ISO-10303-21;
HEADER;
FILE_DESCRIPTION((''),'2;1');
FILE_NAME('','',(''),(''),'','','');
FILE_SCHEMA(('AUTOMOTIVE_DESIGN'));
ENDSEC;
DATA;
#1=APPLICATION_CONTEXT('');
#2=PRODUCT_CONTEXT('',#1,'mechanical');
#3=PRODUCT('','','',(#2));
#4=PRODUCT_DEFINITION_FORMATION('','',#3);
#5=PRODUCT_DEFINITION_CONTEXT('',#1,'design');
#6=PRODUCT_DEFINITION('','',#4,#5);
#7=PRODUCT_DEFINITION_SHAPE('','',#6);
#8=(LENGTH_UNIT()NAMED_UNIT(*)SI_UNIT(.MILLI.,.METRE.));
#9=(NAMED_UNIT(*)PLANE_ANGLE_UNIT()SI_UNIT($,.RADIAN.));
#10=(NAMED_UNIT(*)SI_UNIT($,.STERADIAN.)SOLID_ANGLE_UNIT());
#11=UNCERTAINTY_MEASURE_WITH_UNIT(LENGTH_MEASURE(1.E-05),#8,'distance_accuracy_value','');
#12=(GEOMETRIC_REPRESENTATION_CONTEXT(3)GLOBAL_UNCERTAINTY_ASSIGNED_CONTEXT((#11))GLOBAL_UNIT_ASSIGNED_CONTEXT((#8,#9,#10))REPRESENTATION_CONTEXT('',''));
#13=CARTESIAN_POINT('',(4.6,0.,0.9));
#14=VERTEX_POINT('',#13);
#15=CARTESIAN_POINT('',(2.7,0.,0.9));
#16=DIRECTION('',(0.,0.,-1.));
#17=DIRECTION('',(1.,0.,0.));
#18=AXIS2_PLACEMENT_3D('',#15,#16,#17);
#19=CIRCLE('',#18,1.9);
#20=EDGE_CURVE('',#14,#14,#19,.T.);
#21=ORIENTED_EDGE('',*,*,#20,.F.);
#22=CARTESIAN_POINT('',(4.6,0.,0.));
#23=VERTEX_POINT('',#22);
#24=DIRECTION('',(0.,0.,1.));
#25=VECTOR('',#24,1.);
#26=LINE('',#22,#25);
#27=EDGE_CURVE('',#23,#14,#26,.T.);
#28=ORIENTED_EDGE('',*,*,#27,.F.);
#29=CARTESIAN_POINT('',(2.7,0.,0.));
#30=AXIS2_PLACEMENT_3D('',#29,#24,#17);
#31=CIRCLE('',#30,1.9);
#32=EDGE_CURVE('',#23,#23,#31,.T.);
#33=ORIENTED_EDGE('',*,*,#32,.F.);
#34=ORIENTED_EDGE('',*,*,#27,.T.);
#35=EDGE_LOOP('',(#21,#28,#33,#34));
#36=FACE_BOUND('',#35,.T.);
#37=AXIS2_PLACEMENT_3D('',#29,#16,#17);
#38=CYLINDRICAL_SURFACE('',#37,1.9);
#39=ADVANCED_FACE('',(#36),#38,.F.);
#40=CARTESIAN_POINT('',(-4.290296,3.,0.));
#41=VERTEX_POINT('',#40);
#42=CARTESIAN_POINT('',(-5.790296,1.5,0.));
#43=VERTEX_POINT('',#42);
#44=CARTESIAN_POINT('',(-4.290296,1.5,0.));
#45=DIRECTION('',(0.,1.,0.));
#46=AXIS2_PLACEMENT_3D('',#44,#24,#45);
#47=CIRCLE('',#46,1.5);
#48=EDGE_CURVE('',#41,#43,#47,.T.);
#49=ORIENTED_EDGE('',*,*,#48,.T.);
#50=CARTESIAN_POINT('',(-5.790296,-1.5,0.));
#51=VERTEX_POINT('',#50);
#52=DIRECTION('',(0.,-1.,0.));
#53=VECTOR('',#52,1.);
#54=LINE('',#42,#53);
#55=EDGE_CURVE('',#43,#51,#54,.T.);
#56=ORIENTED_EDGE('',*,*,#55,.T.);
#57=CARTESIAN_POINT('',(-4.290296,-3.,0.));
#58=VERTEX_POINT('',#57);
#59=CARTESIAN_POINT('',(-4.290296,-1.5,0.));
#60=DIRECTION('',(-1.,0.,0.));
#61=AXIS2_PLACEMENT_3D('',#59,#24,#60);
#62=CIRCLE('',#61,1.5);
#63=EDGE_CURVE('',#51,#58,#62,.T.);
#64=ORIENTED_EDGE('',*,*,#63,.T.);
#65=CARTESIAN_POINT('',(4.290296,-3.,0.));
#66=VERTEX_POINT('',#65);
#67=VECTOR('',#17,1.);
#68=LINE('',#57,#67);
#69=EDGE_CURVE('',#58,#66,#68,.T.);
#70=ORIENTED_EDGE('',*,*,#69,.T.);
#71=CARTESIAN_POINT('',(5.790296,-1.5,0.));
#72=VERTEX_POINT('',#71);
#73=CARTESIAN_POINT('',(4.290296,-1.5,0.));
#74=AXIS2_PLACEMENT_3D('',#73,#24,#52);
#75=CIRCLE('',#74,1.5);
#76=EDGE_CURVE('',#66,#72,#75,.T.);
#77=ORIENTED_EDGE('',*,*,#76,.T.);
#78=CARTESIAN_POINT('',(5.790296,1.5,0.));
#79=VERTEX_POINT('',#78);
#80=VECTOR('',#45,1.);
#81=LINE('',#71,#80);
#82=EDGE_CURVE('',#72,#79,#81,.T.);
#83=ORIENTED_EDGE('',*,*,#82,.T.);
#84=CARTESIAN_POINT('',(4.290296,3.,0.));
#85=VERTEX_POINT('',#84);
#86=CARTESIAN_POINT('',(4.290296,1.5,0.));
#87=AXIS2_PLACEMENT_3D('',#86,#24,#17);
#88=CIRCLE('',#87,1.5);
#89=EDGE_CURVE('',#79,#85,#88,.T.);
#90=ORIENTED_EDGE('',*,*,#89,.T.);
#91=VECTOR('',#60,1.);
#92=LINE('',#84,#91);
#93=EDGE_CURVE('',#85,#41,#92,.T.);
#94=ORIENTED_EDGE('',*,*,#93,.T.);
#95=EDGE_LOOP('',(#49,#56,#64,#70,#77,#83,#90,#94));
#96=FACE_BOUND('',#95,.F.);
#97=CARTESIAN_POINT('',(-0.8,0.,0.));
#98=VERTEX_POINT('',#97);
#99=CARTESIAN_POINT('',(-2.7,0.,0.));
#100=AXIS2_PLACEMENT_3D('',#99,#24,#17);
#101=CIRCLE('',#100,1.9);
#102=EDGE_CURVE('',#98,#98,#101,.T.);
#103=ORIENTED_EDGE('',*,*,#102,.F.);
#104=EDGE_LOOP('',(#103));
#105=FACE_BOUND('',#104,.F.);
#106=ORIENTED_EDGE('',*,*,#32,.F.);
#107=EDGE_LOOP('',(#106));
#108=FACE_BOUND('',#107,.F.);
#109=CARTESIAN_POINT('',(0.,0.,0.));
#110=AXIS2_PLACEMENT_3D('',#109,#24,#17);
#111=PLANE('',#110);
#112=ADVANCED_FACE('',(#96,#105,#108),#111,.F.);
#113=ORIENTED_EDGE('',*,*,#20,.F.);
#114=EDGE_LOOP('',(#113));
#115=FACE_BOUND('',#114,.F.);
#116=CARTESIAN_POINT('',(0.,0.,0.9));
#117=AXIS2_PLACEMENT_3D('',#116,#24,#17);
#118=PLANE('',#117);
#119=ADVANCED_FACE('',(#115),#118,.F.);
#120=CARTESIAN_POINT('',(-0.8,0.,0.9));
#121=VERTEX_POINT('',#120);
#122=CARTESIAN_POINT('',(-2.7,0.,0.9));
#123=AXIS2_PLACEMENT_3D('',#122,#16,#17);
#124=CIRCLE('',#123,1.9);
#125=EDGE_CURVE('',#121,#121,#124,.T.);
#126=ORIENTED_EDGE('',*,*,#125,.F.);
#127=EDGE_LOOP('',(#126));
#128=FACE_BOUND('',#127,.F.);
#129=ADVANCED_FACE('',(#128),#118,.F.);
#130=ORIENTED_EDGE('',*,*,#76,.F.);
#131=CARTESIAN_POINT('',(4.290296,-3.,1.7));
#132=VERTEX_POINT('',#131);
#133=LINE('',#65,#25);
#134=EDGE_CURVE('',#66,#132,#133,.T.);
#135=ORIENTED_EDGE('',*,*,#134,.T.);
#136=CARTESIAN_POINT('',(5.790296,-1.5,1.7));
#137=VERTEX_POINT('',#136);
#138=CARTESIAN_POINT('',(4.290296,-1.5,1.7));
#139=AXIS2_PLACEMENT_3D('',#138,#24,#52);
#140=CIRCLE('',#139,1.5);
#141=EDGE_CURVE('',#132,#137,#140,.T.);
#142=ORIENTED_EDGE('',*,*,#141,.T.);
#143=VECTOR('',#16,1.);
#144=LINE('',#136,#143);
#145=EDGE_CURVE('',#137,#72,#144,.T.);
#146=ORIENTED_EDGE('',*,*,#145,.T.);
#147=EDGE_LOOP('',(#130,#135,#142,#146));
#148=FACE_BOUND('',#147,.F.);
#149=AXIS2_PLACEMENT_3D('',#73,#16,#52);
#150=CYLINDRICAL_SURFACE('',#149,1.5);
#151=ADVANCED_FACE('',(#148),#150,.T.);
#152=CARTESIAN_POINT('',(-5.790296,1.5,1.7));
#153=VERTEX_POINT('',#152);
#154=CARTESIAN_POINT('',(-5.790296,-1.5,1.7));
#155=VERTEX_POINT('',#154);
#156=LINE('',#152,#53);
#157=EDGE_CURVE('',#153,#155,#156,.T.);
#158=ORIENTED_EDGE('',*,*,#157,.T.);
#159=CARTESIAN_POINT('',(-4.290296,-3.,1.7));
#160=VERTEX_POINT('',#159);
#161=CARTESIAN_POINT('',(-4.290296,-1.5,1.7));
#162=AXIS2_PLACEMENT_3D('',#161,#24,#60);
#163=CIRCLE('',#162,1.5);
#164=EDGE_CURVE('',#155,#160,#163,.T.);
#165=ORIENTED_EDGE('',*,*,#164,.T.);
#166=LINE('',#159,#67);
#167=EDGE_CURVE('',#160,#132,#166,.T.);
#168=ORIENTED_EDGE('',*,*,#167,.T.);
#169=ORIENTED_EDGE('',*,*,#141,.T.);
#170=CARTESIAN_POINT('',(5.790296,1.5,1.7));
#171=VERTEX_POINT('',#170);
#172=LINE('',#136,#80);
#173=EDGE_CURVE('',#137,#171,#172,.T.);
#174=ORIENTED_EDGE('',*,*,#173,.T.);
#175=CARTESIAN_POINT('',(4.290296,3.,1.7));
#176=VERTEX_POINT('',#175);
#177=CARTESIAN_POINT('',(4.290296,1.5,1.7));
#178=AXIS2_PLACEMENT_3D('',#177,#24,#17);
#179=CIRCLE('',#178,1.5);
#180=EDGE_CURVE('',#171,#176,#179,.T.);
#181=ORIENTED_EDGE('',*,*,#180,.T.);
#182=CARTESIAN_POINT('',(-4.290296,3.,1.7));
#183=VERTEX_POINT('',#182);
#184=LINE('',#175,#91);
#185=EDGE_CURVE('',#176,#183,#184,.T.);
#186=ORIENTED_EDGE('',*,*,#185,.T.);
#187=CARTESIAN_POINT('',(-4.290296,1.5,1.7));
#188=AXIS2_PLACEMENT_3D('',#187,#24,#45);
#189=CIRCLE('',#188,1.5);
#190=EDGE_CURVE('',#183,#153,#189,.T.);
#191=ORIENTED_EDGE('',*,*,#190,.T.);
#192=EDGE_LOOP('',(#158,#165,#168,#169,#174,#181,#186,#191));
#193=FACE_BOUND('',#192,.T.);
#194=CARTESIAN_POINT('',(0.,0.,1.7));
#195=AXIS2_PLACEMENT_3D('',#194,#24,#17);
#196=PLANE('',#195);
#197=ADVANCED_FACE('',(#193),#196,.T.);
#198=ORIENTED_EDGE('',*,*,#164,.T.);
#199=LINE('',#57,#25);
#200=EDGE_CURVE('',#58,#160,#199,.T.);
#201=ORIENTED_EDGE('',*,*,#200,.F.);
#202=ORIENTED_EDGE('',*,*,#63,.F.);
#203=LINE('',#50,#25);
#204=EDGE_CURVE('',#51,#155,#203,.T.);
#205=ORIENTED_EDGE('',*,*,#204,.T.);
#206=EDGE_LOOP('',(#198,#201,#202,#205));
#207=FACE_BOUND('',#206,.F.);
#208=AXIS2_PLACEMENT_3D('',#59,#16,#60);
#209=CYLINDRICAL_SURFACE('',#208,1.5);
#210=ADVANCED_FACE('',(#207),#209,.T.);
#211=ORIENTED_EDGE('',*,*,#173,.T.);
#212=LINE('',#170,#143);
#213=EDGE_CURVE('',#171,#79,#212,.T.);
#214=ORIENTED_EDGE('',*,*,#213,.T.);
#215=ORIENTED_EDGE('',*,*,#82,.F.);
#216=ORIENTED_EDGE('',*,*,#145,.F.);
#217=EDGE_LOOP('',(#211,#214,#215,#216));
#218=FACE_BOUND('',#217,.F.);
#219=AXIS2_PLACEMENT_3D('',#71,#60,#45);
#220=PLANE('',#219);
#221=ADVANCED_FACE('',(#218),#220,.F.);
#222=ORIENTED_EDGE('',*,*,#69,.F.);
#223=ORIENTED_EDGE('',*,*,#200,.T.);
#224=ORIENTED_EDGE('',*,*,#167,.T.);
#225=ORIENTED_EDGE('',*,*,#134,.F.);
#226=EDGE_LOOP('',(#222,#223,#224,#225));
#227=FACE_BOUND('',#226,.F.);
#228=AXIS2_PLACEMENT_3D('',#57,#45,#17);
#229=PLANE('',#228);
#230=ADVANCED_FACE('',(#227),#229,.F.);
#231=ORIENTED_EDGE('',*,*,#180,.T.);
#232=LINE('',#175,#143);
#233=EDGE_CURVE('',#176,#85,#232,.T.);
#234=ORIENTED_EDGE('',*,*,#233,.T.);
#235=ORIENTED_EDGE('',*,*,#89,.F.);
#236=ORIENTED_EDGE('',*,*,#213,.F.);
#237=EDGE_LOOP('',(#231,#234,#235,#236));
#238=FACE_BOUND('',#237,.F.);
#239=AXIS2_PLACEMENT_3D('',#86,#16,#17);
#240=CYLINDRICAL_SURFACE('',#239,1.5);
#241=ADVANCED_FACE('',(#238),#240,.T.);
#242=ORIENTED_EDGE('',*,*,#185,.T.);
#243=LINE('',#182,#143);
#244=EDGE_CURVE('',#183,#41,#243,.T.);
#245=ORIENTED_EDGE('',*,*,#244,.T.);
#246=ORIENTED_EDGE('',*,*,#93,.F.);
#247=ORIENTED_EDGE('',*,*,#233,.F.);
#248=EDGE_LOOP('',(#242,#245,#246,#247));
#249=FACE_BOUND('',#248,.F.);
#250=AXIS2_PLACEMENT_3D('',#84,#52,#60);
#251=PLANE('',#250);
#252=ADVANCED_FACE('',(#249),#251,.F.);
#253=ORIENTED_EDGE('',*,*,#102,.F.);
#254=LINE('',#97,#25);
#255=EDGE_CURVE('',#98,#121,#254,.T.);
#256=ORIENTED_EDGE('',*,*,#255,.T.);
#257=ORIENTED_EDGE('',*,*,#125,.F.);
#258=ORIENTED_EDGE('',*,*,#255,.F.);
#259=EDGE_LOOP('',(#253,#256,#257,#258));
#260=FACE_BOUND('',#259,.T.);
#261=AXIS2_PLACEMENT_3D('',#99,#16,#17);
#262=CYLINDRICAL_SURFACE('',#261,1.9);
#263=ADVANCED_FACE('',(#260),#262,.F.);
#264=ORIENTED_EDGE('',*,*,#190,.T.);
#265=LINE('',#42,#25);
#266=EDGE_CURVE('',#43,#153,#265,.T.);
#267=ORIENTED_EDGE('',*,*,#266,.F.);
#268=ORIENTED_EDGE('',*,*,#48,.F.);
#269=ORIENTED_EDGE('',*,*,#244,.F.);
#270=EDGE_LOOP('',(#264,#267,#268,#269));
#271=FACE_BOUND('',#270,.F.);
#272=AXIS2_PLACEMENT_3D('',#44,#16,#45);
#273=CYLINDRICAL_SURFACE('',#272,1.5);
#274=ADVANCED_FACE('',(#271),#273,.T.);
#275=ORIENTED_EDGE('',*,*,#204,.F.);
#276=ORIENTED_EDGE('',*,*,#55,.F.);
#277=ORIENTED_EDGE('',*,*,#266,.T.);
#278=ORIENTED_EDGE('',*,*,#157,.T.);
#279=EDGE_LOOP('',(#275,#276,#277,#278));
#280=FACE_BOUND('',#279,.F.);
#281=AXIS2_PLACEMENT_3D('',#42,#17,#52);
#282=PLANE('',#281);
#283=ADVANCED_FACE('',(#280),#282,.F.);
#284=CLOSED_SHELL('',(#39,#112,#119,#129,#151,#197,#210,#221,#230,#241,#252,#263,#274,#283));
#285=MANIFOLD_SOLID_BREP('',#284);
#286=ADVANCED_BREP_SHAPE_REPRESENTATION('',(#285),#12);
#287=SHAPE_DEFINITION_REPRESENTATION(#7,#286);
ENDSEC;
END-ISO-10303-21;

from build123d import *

# Parameters (mm, degrees)
F0_R     = 1.9
F1_DEPTH = 1.7
F2_R     = 1.9
F3_DEPTH = 0.8


# Not quite as in the source:
# - a feature names something its author has since deleted; it is built from what else it names


with BuildPart() as f1:
    # F0 (on Top) → F1 (new body)
    with BuildSketch(Plane.XY):
        with BuildLine():
            Line((-0.3902956496, 3), (-4.2902956496, 3))
            ThreePointArc((-4.2902956496, 3), (-5.3509558214, 2.5606601718), (-5.7902956496, 1.5))
            Line((-5.7902956496, 1.5), (-5.7902956496, -1.5))
            ThreePointArc((-5.7902956496, -1.5), (-5.3509558214, -2.5606601718), (-4.2902956496, -3))
            Line((-4.2902956496, -3), (-0.3902956496, -3))
            Line((-0.3902956496, -3), (0.3902956496, -3))
            Line((0.3902956496, -3), (4.2902956496, -3))
            ThreePointArc((4.2902956496, -3), (5.3509558214, -2.5606601718), (5.7902956496, -1.5))
            Line((5.7902956496, -1.5), (5.7902956496, 1.5))
            ThreePointArc((5.7902956496, 1.5), (5.3509558214, 2.5606601718), (4.2902956496, 3))
            Line((4.2902956496, 3), (0.3902956496, 3))
            Line((0.3902956496, 3), (-0.3902956496, 3))
        make_face()
        with Locations((-2.7, 0)):
            Circle(F0_R, mode=Mode.SUBTRACT)
        with Locations((2.7, 0)):
            Circle(F0_R, mode=Mode.SUBTRACT)
    extrude(amount=F1_DEPTH)

    # F2 (on face) → F3 (join)
    with BuildSketch(Plane.XY.offset(1.7)):
        with BuildLine():
            ThreePointArc((-5.7902956496, -1.5), (-5.3509558214, -2.5606601718), (-4.2902956496, -3))
            Line((-4.2902956496, -3), (4.2902956496, -3))
            ThreePointArc((4.2902956496, -3), (5.3509558214, -2.5606601718), (5.7902956496, -1.5))
            Line((5.7902956496, -1.5), (5.7902956496, 1.5))
            ThreePointArc((5.7902956496, 1.5), (5.3509558214, 2.5606601718), (4.2902956496, 3))
            Line((4.2902956496, 3), (-4.2902956496, 3))
            ThreePointArc((-4.2902956496, 3), (-5.3509558214, 2.5606601718), (-5.7902956496, 1.5))
            Line((-5.7902956496, 1.5), (-5.7902956496, -1.5))
        make_face()
        with Locations((-2.7, 0)):
            Circle(F2_R, mode=Mode.SUBTRACT)
        with Locations((2.7, 0)):
            Circle(F2_R, mode=Mode.SUBTRACT)
        with Locations((-2.7, 0)):
            Circle(F2_R)
        with Locations((2.7, 0)):
            Circle(F2_R)
    extrude(amount=-F3_DEPTH)


solid = f1.part
